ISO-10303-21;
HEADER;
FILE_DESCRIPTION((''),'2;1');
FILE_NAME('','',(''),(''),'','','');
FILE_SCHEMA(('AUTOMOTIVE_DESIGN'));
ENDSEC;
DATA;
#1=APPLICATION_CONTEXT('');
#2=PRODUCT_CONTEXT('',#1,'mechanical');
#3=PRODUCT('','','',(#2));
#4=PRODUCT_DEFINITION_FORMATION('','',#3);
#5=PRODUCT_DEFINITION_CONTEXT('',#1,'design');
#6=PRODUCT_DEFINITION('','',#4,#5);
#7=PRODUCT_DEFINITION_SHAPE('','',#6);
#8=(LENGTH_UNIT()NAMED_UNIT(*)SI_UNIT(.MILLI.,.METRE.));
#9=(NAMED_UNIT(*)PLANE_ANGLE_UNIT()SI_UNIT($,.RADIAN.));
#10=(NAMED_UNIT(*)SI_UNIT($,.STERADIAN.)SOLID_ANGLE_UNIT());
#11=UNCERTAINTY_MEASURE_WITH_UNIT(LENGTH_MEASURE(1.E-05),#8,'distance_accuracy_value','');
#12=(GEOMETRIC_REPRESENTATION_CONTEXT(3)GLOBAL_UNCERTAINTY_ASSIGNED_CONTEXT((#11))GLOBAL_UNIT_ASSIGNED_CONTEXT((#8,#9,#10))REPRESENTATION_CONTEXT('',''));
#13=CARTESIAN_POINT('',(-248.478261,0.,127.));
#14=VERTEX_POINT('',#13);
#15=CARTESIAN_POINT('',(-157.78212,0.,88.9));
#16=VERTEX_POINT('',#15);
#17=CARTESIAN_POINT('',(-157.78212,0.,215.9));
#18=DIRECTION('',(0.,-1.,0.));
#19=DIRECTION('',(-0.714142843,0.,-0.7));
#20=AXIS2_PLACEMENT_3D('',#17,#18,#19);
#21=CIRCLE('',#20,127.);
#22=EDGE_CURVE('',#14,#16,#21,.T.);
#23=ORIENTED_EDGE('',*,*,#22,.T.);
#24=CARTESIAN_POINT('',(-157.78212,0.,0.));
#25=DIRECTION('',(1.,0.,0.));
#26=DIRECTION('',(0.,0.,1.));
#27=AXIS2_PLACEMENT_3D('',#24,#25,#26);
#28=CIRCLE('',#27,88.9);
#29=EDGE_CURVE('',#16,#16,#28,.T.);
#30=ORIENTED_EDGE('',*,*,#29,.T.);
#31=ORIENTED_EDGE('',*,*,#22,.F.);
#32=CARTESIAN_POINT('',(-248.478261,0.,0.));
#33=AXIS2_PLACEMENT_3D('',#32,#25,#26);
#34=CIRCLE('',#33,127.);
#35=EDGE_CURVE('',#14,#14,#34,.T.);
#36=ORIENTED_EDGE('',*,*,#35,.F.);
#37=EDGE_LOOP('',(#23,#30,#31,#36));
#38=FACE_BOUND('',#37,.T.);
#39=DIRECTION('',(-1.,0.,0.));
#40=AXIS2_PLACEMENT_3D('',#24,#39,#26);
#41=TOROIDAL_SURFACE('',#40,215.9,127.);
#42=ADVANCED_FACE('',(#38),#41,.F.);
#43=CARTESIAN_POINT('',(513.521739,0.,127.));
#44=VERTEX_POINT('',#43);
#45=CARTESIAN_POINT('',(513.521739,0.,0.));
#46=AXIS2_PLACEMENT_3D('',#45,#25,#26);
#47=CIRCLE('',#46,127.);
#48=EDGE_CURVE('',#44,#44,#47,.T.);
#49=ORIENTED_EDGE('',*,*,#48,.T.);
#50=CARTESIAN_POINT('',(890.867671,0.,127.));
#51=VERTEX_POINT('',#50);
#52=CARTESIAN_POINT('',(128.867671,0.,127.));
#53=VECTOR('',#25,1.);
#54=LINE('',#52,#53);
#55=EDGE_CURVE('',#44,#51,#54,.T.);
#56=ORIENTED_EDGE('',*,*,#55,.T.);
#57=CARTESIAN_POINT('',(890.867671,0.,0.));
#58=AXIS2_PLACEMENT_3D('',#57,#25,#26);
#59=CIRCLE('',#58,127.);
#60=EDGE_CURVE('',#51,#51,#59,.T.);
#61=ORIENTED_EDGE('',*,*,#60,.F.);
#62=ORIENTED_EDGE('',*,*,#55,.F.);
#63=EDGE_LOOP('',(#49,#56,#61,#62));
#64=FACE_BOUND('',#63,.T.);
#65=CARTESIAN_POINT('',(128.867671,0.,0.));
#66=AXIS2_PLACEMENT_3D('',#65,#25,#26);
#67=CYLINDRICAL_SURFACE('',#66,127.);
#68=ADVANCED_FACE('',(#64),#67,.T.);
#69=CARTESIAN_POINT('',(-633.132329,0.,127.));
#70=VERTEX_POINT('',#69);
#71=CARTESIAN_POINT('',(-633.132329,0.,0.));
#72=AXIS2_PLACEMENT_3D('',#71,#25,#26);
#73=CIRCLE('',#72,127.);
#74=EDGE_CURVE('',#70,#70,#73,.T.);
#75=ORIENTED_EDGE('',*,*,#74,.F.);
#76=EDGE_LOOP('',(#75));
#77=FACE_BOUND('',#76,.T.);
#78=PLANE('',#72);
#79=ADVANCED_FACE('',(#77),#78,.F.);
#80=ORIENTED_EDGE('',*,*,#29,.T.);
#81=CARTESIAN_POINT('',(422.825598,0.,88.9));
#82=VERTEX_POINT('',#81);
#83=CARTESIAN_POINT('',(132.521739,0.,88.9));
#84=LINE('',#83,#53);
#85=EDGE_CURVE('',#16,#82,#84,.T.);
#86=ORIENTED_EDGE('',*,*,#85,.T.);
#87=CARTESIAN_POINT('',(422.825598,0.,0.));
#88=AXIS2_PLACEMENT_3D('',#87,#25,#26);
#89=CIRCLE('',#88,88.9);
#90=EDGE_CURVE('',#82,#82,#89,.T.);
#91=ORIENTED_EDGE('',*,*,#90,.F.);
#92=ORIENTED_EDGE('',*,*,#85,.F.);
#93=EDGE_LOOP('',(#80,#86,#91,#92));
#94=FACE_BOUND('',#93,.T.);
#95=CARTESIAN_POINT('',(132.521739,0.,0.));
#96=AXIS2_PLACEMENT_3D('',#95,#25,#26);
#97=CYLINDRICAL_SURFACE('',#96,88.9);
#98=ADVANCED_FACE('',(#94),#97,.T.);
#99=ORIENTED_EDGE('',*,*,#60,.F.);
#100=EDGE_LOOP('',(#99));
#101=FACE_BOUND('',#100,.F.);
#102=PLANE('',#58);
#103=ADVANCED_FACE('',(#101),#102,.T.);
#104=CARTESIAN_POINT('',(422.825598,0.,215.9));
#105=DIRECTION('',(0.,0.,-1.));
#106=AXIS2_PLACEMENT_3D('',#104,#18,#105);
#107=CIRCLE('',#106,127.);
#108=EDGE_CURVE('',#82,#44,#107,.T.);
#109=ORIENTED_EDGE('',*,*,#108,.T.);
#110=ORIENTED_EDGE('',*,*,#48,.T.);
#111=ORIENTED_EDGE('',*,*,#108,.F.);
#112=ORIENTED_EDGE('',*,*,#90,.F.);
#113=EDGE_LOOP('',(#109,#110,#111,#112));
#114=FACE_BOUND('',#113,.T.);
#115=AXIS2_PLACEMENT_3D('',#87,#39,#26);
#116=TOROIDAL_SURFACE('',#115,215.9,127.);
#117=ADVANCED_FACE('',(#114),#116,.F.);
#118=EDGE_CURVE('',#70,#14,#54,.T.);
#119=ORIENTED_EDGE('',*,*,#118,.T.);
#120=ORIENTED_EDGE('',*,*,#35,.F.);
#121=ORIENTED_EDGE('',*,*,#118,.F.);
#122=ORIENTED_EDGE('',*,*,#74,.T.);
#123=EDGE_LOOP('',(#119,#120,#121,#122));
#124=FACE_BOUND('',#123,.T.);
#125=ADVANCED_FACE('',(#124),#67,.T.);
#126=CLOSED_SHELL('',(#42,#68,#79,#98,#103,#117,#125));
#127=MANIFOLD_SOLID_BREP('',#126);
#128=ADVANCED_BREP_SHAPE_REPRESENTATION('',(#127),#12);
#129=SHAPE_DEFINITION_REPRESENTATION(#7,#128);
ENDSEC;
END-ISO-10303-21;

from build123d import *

# Parameters (mm, degrees)
F0_W = 1524
F0_H = 127
F2_W = 762
F2_H = 305.5362462927


# Not quite as in the source:
# - a fillet or chamfer that OpenCascade refuses, or shapes differently, is made with other operations: its cross-section is extruded or revolved along the edge and cut away or added


with BuildPart() as f1:
    # F0 (on Front) → F1 (revolve)
    with BuildSketch(Plane.XZ):
        with Locations((128.8676711868, 63.5)):
            Rectangle(F0_W, F0_H)
    revolve(axis=Axis((128.8676711868, 0, 0), (1, 0, 0)))

    # F2 (on Front) → F3 (revolve, cut)
    with BuildSketch(Plane.XZ):
        with Locations((132.5217391304, 241.6681231464)):
            Rectangle(F2_W, F2_H)
    revolve(axis=Axis((22.0869673282, 0, 0), (1, 0, 0)), mode=Mode.SUBTRACT)

    # F4: fillet of radius 127 on 1 edges, made by hand

    # F4_s1 → F4_t2 (revolve)
    with BuildSketch(Plane.XZ):
        with BuildLine():
            ThreePointArc((-248.4782608696, 127), (-206.9690083239, 98.8117853924), (-157.7821198271, 88.9))
            Line((-157.7821198271, 88.9), (-248.4782608696, 88.9))
            Line((-248.4782608696, 88.9), (-248.4782608696, 127))
        make_face()
    revolve(axis=Axis((-248.4782608696, 0, 0), (1, 0, 0)))

    # F5: fillet of radius 127 on 1 edges, made by hand

    # F5_s1 → F5_t2 (revolve)
    with BuildSketch(Plane.XZ):
        with BuildLine():
            ThreePointArc((422.8255980879, 88.9), (472.0124865848, 98.8117853924), (513.5217391304, 127))
            Line((513.5217391304, 127), (513.5217391304, 88.9))
            Line((513.5217391304, 88.9), (422.8255980879, 88.9))
        make_face()
    revolve(axis=Axis((513.5217391304, 0, 0), (1, 0, 0)))


solid = f1.part
